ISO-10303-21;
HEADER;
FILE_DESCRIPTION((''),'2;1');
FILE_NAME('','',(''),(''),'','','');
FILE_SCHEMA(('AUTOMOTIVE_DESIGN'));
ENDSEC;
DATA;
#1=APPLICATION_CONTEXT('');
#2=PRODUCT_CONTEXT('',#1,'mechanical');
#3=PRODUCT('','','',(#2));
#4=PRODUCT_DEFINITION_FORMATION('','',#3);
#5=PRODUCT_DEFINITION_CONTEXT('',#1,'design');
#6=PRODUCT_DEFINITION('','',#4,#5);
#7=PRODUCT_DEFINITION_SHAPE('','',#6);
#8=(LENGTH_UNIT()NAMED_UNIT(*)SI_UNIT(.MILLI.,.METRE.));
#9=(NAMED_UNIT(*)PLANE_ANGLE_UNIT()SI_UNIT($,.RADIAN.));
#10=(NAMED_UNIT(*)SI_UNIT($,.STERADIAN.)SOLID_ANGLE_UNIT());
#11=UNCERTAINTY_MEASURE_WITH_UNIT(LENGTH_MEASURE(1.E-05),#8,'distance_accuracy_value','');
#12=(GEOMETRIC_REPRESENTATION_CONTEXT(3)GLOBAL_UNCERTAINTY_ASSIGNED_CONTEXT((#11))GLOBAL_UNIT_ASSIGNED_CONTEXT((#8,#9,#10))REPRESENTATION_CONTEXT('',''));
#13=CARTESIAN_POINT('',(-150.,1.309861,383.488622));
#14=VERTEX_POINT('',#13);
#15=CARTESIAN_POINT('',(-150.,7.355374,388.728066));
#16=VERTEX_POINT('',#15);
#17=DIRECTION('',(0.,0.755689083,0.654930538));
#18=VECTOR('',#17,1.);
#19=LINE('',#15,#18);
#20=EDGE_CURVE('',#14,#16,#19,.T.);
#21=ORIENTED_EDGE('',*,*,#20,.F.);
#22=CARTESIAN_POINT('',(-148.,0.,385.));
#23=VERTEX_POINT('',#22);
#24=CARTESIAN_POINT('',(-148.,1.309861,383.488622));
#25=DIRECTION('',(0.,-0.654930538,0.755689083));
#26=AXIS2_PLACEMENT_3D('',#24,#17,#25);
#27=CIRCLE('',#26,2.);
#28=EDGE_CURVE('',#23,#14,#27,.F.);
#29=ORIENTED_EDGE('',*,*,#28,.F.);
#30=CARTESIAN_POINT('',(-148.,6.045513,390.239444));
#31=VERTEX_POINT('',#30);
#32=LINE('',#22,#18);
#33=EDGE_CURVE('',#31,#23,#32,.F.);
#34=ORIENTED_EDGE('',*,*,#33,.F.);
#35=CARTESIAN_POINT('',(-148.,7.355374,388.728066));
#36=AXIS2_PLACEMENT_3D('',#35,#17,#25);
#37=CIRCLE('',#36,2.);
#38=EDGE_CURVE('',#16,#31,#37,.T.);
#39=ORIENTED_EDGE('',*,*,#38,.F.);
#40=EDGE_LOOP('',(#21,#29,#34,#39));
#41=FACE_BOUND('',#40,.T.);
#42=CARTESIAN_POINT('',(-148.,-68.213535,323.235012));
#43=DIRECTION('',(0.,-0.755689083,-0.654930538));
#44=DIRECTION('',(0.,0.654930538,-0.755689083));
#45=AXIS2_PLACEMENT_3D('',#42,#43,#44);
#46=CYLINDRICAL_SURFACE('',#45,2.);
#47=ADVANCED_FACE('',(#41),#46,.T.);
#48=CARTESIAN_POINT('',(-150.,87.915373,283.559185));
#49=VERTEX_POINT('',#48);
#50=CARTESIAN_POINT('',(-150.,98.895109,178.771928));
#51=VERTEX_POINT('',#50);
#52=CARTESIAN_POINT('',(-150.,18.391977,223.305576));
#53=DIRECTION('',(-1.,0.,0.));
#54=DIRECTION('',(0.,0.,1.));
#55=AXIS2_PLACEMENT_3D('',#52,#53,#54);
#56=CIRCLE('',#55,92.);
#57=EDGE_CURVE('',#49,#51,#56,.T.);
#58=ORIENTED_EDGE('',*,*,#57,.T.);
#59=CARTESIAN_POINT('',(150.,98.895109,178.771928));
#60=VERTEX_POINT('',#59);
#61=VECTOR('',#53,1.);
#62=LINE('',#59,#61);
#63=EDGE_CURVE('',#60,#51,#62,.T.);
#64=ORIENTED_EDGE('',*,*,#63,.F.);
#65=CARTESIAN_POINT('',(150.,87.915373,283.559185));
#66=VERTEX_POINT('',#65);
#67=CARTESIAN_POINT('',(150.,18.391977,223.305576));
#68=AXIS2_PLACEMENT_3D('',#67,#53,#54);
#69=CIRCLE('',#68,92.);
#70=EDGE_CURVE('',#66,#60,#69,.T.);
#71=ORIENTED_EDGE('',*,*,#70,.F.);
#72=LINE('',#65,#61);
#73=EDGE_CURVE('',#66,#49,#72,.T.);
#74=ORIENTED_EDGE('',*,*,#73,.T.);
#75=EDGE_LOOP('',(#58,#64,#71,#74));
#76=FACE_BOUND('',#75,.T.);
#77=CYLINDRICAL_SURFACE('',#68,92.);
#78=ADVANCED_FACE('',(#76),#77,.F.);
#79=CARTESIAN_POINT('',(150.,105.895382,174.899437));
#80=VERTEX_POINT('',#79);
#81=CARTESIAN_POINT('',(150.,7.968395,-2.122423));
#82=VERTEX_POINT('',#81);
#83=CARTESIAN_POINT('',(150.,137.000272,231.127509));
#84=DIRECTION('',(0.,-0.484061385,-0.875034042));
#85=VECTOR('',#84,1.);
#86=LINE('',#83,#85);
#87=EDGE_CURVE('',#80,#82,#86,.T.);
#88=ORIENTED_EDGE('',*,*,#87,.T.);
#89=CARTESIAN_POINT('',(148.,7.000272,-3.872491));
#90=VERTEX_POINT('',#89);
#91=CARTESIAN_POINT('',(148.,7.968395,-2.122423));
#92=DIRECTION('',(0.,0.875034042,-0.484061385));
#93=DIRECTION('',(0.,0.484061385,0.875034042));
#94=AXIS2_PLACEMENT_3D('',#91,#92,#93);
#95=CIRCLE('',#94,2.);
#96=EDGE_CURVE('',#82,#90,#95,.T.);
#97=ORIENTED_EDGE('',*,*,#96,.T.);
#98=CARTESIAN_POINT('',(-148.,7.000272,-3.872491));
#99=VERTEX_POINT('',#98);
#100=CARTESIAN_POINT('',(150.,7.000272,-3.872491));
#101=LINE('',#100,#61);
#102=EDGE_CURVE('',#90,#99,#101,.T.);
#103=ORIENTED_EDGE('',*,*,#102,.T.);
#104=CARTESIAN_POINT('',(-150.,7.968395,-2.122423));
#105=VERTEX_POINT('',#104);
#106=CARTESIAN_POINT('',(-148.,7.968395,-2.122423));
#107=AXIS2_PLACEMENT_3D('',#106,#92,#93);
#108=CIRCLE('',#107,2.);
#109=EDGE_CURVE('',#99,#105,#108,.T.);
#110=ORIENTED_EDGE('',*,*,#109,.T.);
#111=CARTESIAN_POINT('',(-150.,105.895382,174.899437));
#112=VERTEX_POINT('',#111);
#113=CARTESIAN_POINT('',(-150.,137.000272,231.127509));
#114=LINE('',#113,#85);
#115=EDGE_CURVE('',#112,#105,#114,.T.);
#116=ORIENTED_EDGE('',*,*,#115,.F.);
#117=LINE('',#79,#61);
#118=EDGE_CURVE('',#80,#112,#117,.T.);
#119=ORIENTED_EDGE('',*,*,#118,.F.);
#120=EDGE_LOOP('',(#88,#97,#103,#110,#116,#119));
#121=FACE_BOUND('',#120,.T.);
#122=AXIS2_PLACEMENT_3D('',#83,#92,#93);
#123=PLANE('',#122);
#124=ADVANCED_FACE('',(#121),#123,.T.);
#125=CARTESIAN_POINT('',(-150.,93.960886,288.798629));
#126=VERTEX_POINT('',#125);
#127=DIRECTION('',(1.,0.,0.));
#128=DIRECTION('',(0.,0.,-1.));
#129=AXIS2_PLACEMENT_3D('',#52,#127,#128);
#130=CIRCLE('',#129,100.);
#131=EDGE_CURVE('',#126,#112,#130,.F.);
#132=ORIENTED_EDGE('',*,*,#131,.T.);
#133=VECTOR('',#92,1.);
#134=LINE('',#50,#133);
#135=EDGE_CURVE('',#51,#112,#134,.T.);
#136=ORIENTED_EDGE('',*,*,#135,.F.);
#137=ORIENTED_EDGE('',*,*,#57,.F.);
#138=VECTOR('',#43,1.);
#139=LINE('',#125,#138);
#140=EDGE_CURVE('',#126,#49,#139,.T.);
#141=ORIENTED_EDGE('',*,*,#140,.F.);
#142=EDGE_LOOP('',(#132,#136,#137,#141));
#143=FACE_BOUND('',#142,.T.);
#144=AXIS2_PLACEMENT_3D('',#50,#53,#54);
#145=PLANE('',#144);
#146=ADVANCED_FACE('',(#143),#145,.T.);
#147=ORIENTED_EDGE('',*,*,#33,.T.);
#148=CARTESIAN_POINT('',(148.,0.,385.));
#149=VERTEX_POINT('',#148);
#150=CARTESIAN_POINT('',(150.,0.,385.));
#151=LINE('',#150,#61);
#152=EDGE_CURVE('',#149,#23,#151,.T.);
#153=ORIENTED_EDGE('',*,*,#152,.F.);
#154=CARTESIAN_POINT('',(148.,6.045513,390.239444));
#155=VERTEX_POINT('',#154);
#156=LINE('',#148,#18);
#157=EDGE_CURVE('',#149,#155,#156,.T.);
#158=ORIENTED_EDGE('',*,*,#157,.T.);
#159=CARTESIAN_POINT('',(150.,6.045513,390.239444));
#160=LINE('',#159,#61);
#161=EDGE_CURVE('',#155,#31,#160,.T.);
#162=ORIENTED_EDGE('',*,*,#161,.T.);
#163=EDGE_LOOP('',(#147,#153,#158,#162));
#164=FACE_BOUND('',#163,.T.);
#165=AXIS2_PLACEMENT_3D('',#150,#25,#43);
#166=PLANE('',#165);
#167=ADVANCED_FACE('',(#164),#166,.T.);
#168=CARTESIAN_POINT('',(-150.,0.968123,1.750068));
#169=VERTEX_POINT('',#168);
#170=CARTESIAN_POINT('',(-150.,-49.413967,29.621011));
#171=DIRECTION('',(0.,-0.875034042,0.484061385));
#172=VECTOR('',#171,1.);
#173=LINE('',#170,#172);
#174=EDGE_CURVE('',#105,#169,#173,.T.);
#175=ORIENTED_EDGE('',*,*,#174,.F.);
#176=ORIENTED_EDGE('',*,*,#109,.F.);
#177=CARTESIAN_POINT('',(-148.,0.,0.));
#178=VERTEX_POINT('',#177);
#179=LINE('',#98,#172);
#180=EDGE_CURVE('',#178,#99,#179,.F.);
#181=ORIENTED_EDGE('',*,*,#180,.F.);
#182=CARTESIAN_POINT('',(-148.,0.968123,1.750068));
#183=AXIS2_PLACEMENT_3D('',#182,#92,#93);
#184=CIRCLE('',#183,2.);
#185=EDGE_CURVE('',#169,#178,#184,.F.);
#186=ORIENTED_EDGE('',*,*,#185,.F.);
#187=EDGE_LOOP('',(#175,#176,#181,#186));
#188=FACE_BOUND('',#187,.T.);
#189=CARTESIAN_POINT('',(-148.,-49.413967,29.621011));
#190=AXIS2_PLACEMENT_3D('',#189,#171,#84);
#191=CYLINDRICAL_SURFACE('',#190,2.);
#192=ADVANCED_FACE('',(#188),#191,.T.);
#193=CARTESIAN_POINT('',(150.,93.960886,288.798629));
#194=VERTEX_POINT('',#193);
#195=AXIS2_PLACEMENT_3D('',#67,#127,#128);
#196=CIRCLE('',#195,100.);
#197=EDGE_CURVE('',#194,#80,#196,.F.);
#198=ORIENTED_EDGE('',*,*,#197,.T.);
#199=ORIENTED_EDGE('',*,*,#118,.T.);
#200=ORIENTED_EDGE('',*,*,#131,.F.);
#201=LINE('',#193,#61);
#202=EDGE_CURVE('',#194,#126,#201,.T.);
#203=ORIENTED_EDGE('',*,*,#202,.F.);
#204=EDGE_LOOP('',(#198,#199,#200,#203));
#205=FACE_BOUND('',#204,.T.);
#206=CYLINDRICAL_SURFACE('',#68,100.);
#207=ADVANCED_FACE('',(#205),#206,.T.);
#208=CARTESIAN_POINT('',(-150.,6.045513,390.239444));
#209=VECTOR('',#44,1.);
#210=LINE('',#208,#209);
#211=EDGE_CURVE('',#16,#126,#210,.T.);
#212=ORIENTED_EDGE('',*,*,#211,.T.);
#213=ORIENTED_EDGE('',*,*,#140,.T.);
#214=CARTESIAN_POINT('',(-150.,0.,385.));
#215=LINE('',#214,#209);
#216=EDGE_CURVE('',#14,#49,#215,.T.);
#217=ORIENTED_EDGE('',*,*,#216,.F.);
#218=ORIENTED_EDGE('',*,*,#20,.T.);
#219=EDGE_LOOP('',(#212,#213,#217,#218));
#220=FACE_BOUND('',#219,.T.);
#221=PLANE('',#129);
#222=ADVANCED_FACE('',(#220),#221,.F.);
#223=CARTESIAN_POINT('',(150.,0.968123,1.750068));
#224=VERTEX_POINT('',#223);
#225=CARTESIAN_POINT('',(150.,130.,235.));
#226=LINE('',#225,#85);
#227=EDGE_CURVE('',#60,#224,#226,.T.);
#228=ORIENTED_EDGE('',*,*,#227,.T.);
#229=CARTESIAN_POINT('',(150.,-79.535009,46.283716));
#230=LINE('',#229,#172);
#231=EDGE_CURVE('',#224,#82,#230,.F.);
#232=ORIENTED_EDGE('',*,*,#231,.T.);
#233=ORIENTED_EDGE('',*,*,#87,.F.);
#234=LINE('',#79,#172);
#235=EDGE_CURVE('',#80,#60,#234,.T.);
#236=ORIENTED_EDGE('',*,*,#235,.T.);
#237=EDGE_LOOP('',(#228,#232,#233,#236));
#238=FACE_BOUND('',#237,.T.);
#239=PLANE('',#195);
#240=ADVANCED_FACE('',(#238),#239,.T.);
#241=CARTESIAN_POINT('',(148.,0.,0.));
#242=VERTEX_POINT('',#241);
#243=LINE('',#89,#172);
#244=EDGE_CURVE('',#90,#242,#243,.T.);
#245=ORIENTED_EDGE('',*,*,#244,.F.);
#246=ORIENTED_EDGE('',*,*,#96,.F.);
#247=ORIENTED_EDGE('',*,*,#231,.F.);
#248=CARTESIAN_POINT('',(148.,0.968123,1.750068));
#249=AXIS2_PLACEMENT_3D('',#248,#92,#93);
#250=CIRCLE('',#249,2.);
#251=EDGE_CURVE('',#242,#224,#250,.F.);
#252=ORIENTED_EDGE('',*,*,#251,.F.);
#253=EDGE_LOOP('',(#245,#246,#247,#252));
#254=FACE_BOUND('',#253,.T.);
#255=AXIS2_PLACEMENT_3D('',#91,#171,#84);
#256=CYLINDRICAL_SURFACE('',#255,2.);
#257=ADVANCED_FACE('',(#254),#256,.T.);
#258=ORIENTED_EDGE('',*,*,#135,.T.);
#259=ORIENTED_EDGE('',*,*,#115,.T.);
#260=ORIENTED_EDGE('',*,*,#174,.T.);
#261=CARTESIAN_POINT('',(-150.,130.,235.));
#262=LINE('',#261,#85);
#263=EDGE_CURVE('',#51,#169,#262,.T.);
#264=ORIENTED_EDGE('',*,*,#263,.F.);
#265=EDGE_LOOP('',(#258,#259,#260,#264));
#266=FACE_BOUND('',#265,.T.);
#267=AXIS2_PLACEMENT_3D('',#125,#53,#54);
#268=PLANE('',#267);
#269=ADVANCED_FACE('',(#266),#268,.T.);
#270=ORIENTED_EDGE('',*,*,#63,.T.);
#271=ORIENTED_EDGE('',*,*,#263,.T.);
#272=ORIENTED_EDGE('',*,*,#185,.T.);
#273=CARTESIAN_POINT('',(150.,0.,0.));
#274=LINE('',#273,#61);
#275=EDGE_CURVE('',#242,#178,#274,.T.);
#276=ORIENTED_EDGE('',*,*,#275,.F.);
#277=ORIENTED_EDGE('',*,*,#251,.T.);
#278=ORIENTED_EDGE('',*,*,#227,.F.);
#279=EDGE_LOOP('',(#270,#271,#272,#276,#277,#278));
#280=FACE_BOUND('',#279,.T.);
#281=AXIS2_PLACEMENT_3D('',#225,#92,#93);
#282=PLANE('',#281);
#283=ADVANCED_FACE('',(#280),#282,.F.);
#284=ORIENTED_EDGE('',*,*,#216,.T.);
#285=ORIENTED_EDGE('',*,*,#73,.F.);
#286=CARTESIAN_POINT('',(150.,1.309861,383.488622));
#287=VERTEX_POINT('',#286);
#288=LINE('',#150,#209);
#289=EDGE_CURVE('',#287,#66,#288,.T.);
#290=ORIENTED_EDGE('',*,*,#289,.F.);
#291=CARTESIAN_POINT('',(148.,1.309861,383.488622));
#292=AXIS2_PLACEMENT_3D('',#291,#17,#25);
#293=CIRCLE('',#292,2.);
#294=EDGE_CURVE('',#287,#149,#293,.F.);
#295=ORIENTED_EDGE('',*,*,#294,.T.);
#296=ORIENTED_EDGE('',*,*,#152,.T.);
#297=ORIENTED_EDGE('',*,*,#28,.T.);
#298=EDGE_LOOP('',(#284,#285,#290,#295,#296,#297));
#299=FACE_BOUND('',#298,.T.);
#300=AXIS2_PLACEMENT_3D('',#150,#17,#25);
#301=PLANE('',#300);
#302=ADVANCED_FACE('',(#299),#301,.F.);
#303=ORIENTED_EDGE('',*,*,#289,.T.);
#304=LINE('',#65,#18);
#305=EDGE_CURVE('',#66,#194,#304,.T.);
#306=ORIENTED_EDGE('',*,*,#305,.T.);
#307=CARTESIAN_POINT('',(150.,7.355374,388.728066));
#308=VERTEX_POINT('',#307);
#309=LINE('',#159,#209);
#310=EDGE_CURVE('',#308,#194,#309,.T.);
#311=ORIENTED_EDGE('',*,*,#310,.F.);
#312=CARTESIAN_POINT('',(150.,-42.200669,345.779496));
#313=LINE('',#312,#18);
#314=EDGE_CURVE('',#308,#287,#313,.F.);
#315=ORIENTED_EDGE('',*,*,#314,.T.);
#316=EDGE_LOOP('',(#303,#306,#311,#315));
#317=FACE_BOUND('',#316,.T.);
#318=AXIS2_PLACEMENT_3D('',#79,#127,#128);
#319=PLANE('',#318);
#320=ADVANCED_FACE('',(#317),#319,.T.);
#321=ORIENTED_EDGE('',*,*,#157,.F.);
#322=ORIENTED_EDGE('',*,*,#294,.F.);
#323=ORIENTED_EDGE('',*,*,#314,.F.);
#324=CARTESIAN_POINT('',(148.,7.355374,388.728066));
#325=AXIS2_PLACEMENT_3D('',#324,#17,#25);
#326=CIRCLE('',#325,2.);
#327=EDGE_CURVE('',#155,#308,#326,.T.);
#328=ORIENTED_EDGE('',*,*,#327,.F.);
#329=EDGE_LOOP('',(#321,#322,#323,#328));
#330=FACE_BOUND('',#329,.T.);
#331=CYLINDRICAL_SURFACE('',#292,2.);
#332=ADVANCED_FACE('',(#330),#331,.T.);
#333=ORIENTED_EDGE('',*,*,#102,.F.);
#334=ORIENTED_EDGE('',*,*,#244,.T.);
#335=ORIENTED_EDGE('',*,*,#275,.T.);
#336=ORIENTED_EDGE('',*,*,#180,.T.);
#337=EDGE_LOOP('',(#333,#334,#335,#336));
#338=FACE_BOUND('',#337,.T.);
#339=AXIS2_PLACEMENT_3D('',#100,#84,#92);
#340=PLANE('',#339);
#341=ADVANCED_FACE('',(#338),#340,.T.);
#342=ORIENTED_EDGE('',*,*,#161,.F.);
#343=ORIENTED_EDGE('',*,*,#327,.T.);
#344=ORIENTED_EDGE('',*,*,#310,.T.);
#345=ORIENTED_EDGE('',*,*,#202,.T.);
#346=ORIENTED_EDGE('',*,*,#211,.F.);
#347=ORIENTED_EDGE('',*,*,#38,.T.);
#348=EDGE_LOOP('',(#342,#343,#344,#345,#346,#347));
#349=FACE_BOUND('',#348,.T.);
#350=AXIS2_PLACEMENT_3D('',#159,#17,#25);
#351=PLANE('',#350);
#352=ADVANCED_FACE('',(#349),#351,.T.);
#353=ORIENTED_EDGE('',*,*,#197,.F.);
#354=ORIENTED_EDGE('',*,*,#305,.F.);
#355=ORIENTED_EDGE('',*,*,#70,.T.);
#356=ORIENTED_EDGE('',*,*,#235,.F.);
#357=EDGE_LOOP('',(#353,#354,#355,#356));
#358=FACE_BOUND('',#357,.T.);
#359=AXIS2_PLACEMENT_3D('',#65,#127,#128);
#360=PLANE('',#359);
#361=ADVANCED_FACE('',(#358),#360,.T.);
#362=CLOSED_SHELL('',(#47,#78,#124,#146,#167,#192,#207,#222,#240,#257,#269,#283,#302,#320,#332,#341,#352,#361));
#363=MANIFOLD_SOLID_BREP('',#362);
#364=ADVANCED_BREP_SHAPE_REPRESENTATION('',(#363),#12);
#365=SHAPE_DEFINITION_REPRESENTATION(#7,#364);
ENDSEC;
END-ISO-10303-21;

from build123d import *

# Parameters (mm, degrees)
BASE_FLANGE1_DEPTH = 150
FILLET_2_0_R       = 2


# Sheet-metal steps are written as plain solids
with BuildPart() as part:
    # Sketch1 → Base-Flange1 (new, symmetric)
    with BuildSketch(Plane(origin=(0, 0, 0), x_dir=(0, 0, -1), z_dir=(1, 0, 0))):
        with BuildLine():
            Line((-385, 0), (-283.559185115, 87.915372901))
            ThreePointArc((-283.559185115, 87.915372901), (-232.892960746, 109.891059496), (-178.771928145, 98.895109186))
            Line((-178.771928145, 98.895109186), (0, 0))
            Line((0, 0), (3.872491081, 7.000272339))
            Line((3.872491081, 7.000272339), (-174.899437063, 105.895381526))
            ThreePointArc((-174.899437063, 105.895381526), (-233.726646413, 117.847501428), (-288.798629422, 93.960885563))
            Line((-288.798629422, 93.960885563), (-390.239444307, 6.045512662))
            Line((-390.239444307, 6.045512662), (-385, 0))
        make_face()
    extrude(amount=BASE_FLANGE1_DEPTH, both=True)

    # Fillet-2.0
    fillet_2_0_edges = [part.edges().sort_by_distance(p)[0] for p in [
        (150, 3.022756331, 387.619722154),
        (150, 3.50013617, -1.936245541),
        (-150, 3.022756331, 387.619722154),
        (-150, 3.50013617, -1.936245541),
    ]]
    fillet(fillet_2_0_edges, radius=FILLET_2_0_R)


solid = part.part
